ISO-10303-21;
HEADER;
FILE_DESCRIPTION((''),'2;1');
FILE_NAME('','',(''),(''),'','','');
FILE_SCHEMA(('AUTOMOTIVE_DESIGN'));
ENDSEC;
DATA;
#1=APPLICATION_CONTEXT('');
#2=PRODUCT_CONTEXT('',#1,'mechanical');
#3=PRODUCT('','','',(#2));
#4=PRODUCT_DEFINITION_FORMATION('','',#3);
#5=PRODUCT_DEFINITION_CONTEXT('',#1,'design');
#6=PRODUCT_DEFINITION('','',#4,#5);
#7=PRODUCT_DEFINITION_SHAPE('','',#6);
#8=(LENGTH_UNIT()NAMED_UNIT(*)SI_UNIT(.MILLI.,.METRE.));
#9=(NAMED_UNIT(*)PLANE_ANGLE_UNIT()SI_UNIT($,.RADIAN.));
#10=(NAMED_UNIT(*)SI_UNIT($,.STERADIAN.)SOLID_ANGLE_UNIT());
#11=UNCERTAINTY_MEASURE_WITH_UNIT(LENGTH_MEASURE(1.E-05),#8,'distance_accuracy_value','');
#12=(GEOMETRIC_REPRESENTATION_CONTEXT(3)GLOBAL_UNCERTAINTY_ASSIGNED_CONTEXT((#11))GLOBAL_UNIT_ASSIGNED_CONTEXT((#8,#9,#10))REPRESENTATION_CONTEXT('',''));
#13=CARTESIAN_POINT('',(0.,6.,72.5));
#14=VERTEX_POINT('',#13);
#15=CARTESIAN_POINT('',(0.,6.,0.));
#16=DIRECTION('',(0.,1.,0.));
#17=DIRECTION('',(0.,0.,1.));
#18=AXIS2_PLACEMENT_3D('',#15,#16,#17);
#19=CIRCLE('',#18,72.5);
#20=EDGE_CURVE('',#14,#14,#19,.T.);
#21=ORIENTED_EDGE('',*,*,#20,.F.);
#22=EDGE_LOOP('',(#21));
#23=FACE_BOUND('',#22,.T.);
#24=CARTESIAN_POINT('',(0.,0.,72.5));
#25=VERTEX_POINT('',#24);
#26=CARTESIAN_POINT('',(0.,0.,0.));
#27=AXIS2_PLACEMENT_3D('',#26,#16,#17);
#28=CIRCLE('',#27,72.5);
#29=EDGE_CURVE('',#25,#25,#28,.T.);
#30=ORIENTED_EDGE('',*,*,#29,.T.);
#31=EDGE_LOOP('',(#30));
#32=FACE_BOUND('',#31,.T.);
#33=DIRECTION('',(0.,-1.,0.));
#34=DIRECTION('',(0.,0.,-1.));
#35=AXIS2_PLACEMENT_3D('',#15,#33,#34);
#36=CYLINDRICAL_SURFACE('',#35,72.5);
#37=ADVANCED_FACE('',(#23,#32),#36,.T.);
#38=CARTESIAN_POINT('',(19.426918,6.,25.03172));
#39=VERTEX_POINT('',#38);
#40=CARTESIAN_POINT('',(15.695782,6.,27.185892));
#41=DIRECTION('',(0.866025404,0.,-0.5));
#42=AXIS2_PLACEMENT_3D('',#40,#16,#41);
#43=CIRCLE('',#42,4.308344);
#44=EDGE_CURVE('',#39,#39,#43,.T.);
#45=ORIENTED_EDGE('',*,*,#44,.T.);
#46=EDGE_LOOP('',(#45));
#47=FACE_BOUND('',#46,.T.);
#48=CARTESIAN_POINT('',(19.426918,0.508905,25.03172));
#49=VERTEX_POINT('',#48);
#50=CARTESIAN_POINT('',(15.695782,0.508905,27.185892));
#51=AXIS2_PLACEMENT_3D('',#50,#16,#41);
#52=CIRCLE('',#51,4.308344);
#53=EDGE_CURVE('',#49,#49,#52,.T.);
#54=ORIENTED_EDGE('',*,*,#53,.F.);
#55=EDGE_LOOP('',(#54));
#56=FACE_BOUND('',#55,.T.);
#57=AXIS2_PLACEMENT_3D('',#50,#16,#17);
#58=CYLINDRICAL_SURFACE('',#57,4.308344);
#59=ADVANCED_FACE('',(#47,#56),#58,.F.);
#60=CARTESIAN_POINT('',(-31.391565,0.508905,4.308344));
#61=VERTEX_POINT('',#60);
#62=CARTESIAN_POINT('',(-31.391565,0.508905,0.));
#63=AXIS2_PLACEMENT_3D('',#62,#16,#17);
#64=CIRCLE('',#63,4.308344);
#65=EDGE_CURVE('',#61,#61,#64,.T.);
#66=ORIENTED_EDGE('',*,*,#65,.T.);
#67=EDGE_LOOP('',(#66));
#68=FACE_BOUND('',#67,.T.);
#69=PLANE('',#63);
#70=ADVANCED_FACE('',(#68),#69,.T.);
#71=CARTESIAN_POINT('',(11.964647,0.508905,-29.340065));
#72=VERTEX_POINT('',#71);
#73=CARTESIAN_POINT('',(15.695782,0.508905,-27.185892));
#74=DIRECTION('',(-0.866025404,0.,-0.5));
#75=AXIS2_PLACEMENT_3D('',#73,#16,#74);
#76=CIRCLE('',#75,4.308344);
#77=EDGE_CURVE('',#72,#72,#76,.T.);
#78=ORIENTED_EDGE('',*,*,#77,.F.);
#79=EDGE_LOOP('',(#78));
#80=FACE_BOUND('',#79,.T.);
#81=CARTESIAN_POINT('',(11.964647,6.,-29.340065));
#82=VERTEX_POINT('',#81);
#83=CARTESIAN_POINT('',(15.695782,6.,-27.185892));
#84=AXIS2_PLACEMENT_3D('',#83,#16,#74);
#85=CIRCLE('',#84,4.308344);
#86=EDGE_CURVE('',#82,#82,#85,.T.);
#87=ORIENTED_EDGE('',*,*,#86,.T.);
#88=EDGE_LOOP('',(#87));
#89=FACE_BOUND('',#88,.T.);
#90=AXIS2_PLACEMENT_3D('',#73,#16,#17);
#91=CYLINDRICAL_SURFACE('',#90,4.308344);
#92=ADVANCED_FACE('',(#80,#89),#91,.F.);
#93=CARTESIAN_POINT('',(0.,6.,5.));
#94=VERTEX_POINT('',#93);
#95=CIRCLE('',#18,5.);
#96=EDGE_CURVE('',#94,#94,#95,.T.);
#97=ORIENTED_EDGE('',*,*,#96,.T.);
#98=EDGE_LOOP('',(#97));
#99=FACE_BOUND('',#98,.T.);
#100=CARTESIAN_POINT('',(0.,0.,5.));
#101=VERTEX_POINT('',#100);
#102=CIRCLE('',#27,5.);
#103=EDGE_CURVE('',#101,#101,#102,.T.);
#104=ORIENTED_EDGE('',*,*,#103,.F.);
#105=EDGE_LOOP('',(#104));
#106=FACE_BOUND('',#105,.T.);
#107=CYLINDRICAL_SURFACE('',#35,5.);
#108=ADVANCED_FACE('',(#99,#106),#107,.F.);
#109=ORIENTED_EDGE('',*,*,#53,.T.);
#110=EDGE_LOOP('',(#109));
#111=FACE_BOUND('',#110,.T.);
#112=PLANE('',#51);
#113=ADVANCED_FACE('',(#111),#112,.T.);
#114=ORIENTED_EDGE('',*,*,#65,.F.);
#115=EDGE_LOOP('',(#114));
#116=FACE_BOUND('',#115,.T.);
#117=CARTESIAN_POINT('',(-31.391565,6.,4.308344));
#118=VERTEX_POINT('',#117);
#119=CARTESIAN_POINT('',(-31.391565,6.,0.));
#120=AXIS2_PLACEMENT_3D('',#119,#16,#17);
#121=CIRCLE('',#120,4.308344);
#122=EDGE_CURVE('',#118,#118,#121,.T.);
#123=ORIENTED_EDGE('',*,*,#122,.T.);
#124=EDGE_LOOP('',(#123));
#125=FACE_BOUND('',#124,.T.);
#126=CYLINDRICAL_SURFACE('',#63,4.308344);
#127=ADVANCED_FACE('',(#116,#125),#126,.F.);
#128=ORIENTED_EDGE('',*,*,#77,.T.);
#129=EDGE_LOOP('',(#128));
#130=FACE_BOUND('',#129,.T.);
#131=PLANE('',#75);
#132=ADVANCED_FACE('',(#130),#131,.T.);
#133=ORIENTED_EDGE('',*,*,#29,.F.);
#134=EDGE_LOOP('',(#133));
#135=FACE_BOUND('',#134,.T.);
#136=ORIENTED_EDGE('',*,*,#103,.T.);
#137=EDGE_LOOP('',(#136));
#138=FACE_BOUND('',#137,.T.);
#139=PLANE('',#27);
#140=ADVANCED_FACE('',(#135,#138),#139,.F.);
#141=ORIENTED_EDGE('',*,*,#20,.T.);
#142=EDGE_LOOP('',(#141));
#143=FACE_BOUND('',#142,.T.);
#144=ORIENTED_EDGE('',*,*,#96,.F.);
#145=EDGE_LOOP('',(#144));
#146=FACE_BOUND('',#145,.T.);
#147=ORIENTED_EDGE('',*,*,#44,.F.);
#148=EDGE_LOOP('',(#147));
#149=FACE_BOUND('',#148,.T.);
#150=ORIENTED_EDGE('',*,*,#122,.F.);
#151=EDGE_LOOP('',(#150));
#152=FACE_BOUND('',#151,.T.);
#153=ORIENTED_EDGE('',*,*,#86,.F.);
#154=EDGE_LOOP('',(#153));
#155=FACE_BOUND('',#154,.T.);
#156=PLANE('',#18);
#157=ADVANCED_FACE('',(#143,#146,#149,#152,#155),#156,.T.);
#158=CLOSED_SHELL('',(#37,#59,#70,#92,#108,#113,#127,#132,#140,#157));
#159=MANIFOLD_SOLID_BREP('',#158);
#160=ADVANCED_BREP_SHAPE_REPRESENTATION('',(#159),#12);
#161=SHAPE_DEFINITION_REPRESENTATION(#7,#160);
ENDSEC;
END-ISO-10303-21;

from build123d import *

# Parameters (mm, degrees)
SKETCH1_R           = 72.5
BOSS_EXTRUDE1_DEPTH = 6
SKETCH2_R           = 5
CUT_EXTRUDE1_DEPTH  = 103.705890776
SKETCH3_R           = 4.308344106
CUT_EXTRUDE2_DEPTH  = 5.491094722
CIRPATTERN1_COUNT   = 3


with BuildPart() as part:
    # Sketch1 → Boss-Extrude1 (new body)
    with BuildSketch(Plane(origin=(0, 0, 0), x_dir=(1, 0, 0), z_dir=(0, 1, 0))):
        Circle(SKETCH1_R)
    extrude(amount=BOSS_EXTRUDE1_DEPTH)

    # Sketch2 → Cut-Extrude1 (cut, through all)
    with BuildSketch(Plane(origin=(0, 0, 0), x_dir=(1, 0, 0), z_dir=(0, 1, 0))):
        Circle(SKETCH2_R)
    extrude(amount=CUT_EXTRUDE1_DEPTH, mode=Mode.SUBTRACT)

    # Sketch3 → Cut-Extrude2 (cut)
    with BuildSketch(Plane(origin=(0, 6, 0), x_dir=(1, 0, 0), z_dir=(0, 1, 0))):
        with Locations((-31.391564651, 0)):
            Circle(SKETCH3_R)
    cut_extrude2 = extrude(amount=-CUT_EXTRUDE2_DEPTH, mode=Mode.SUBTRACT)

    # CirPattern1: Cut-Extrude2 ×3 about axis
    cirpattern1_axis = Axis((0, 0, 0), (0, 1, 0))
    for i in range(1, CIRPATTERN1_COUNT):
        add(cut_extrude2.rotate(cirpattern1_axis, i * 360 / CIRPATTERN1_COUNT), mode=Mode.SUBTRACT)


solid = part.part
